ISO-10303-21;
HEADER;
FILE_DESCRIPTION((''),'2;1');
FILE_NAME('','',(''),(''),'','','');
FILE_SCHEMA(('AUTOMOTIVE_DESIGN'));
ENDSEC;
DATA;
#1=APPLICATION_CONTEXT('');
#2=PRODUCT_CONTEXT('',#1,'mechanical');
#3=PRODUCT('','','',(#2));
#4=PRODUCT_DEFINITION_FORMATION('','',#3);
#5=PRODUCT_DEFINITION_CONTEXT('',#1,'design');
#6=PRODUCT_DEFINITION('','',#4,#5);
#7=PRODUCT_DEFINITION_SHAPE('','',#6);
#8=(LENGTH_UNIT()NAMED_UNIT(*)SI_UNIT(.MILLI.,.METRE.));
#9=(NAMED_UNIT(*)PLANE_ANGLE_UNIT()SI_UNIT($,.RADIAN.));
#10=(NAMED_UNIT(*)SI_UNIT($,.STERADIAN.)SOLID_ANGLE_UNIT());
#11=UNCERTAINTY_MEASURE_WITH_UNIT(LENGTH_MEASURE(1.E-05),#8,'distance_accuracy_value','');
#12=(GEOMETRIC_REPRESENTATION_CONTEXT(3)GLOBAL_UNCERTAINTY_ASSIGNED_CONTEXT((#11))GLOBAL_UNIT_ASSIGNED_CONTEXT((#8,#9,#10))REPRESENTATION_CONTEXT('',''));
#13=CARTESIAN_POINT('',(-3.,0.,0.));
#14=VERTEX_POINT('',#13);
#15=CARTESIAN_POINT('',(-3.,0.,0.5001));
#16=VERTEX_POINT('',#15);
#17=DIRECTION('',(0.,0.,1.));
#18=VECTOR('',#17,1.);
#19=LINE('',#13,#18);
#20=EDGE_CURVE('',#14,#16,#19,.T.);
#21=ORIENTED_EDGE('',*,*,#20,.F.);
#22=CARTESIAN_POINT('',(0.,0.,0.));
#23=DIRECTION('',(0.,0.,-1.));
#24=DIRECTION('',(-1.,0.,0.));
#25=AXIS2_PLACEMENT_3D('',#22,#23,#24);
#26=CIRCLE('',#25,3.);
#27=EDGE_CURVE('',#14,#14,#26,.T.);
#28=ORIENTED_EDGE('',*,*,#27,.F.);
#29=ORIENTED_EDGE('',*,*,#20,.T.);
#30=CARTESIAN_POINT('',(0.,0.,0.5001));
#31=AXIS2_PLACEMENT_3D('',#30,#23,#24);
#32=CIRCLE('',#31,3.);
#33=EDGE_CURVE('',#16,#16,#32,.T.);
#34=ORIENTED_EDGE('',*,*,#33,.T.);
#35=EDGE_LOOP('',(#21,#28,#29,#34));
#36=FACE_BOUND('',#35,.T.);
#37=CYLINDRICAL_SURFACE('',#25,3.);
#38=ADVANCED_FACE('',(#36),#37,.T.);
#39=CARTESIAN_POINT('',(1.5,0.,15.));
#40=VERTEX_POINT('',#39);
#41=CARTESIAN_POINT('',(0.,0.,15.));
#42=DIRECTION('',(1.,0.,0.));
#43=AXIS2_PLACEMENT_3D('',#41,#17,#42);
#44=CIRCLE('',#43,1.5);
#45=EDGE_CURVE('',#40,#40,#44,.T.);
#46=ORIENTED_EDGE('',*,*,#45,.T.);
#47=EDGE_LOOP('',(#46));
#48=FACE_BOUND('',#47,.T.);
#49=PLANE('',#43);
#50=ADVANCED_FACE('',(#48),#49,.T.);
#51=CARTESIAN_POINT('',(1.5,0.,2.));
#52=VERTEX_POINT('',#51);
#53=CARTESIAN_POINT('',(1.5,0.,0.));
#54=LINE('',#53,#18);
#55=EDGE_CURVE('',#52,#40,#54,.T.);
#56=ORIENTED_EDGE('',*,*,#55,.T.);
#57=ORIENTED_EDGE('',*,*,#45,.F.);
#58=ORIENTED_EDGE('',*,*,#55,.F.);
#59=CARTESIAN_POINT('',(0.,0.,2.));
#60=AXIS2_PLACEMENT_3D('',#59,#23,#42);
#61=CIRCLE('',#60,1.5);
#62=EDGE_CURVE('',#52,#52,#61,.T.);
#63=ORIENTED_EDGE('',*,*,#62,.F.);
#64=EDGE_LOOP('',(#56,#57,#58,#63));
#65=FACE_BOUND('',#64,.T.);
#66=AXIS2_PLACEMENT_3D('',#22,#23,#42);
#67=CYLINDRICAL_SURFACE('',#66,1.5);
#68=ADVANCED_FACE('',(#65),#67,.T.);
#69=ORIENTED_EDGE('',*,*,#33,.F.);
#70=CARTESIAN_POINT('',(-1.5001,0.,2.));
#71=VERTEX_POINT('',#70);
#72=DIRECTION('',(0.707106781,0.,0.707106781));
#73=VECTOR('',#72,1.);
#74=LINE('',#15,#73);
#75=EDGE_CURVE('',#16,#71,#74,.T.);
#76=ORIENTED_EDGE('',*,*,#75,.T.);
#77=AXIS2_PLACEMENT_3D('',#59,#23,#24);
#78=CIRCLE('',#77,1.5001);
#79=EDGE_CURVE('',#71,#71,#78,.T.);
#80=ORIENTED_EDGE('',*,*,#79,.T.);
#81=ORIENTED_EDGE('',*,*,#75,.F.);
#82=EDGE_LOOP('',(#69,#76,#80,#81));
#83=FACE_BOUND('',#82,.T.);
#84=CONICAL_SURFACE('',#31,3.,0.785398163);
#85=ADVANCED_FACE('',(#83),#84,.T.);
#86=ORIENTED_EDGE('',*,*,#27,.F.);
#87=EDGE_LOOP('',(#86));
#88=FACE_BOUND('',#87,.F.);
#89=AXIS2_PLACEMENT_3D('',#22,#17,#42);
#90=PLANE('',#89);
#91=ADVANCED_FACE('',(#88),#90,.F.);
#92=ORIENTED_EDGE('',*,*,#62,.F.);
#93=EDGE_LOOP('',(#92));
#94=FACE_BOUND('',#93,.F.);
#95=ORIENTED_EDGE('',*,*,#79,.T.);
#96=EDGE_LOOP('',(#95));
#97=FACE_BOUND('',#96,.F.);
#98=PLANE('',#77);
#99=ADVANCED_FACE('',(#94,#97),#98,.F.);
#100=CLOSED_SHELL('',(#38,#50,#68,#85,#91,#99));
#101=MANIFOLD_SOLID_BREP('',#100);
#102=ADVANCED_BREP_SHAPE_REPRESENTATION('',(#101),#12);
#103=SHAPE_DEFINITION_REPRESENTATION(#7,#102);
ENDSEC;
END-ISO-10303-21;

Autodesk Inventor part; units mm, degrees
ref_plane "YZ Plane" through (0, 0, 0) normal (1, 0, 0) x (0, 1, 0)
ref_plane "XZ Plane" through (0, 0, 0) normal (0, 1, 0) x (-1, 0, 0)
ref_plane "XY Plane" through (0, 0, 0) normal (0, 0, 1) x (1, 0, 0)
sketch "スケッチ1" plane through (0, 0, 0) normal (0, 0, 1) x (1, 0, 0)
  circle A0 centre (0, 0) radius 1.5
  dimension "d0" = 3
extrude "押し出し1" add sketch "スケッチ1" along normal blind 15
sketch "スケッチ2" plane through (0, 0, 0) normal (0, 0, -1) x (-1, 0, 0)
  circle A0 centre (0, 0) radius 3
  dimension "d3" = 6
extrude "押し出し2" add sketch "スケッチ2" against normal blind 2
thread "ねじ1" size "M3x0.5" class "6g" standard "ANSI Metric M Profile" full length
chamfer "面取り1" distance 1.5 angle 45 1 edges at (3, 0, 2)
properties part number "ネジ皿m3,15" material "鋼、高強度、低合金"
